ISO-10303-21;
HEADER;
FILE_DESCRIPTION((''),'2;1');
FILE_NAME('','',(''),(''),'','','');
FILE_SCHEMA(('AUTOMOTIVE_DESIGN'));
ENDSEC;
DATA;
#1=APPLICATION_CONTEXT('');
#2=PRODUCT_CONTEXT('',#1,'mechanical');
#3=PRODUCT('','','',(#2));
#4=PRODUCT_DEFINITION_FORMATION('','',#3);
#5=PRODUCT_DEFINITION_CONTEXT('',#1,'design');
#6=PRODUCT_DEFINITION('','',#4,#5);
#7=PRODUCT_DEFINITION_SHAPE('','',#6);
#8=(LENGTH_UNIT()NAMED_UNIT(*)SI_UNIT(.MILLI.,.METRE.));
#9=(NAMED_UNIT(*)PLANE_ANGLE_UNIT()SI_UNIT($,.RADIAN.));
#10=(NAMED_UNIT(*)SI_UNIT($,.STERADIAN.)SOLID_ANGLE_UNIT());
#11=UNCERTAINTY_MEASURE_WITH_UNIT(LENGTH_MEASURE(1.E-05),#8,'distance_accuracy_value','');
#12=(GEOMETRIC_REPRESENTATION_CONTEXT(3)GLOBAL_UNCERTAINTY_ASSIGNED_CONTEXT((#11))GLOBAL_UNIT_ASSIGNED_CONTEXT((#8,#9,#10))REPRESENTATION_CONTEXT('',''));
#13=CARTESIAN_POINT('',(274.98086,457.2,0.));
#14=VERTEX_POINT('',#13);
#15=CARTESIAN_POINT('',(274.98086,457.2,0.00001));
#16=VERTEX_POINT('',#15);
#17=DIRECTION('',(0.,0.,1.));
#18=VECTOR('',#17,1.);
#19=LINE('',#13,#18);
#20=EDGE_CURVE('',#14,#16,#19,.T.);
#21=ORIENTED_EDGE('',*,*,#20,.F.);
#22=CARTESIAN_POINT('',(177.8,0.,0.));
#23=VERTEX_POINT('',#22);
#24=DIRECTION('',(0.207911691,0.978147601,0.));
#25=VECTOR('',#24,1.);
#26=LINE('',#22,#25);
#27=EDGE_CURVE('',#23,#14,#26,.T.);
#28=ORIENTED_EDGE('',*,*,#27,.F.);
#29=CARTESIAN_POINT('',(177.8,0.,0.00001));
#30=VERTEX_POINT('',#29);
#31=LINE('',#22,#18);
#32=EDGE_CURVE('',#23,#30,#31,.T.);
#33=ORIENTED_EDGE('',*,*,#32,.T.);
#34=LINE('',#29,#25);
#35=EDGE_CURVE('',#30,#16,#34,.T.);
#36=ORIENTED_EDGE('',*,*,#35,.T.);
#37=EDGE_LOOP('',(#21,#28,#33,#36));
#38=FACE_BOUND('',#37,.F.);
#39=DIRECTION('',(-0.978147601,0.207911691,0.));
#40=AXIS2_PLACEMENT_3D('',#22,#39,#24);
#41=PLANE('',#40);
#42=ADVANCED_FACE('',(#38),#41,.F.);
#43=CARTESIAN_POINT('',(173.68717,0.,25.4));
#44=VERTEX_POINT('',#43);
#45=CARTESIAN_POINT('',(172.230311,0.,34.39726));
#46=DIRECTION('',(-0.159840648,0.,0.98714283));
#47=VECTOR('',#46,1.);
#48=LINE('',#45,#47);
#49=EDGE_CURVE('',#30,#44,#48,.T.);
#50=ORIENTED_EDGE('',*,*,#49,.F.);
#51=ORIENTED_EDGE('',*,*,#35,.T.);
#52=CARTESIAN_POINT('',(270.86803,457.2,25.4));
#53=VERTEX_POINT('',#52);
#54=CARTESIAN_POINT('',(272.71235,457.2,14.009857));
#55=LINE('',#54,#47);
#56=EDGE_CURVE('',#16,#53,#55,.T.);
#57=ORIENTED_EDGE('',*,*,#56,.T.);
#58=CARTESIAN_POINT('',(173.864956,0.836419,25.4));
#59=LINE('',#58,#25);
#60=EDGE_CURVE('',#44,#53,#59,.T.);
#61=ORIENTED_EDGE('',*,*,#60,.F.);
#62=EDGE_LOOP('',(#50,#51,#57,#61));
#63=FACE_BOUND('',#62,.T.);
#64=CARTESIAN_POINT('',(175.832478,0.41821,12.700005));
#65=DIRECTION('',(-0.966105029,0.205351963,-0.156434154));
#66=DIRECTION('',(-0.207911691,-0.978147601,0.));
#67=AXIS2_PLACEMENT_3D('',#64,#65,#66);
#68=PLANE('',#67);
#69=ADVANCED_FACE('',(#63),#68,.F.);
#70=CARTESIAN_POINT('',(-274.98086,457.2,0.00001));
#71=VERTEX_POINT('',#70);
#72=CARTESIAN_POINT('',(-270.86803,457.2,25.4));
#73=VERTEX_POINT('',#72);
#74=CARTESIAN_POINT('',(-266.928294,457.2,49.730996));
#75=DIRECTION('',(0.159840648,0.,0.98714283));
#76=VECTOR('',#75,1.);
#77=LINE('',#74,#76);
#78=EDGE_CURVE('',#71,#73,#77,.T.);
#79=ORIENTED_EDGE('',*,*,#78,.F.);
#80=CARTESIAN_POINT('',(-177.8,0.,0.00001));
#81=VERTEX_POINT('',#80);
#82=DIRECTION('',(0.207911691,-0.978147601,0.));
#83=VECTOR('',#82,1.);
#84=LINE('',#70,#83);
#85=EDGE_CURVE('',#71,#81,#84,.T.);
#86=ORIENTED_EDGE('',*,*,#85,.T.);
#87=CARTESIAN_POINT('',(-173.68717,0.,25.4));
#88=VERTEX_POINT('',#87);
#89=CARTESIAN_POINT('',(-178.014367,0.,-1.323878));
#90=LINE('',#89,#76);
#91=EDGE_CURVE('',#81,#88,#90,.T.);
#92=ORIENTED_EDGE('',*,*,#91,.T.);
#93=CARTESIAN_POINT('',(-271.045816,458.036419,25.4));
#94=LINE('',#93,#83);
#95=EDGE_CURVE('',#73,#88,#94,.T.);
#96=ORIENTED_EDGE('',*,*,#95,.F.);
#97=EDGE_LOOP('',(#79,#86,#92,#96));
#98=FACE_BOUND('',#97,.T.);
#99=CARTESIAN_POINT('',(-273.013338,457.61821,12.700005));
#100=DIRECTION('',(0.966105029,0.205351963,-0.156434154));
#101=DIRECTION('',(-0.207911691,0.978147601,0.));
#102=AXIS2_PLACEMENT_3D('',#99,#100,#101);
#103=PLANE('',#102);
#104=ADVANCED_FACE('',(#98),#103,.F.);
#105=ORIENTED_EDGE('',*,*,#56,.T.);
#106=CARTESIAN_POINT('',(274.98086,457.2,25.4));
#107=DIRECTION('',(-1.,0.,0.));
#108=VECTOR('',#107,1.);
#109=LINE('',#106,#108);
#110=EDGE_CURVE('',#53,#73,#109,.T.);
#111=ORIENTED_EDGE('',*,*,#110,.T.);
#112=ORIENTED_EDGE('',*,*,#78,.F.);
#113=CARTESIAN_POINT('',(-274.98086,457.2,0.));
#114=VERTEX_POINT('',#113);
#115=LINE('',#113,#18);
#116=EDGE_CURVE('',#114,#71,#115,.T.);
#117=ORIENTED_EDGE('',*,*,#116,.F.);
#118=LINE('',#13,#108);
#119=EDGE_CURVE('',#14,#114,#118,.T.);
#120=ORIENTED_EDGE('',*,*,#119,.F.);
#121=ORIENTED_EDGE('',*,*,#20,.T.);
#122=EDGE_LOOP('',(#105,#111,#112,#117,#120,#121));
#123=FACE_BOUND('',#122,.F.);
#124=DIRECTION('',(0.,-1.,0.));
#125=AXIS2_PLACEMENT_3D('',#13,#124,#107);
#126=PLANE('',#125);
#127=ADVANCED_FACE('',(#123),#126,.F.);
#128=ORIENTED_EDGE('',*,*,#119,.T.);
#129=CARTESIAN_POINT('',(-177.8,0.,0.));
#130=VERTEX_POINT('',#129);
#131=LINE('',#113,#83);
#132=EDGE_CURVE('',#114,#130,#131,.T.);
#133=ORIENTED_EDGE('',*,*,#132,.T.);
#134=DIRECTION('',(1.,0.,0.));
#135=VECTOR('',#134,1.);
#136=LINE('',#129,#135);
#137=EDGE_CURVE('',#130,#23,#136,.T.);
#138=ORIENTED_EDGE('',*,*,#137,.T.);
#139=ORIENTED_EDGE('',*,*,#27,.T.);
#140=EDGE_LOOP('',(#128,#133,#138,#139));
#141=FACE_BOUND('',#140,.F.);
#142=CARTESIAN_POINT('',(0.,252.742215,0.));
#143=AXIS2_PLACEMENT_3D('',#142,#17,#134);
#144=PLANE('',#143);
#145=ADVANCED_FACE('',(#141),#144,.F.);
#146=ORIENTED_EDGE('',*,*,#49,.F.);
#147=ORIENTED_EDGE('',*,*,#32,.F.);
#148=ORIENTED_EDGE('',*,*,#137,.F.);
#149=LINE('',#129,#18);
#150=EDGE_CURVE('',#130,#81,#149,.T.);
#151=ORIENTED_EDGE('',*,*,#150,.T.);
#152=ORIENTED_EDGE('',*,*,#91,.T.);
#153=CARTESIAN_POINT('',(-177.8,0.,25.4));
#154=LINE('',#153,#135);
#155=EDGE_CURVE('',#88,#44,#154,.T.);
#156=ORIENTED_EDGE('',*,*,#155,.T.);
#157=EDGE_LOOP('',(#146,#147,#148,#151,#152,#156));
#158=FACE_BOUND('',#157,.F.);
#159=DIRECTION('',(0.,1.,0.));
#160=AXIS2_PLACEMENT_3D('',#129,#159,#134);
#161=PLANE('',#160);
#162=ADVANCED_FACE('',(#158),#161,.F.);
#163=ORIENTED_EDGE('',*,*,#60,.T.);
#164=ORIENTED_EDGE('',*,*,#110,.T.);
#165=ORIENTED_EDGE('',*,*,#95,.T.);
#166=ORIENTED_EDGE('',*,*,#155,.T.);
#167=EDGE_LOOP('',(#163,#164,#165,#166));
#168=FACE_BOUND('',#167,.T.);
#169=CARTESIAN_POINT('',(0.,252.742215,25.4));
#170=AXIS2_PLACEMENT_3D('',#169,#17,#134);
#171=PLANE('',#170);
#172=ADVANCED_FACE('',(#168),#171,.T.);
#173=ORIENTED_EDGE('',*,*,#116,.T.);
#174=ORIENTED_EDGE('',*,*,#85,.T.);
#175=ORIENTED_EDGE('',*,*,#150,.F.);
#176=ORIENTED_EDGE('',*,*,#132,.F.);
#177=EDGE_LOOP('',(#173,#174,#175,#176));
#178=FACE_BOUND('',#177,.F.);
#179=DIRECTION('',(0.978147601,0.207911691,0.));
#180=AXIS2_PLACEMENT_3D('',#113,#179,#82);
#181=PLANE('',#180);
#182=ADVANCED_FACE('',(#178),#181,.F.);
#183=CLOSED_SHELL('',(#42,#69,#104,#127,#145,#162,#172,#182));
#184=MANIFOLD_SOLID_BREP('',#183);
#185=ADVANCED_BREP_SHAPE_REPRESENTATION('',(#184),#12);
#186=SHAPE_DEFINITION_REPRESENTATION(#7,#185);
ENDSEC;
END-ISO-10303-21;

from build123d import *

# Parameters (mm, degrees)
F2_DEPTH   = 25.4
F3_SIZE2   = 4.022955
F3_SIZE    = 25.39999
F3_2_SIZE2 = 4.022955
F3_2_SIZE  = 25.39999


# Not quite as in the source:
# - a fillet or chamfer is up to 0.001 mm smaller than in the source, because OpenCascade refuses the exact size


with BuildPart() as f2:
    # F1 (on Top) → F2 (new body)
    with BuildSketch(Plane.XY):
        Polygon((-274.9808599955, 457.2), (-177.8, 0), (177.8, 0), (274.9808599955, 457.2), align=None)
    extrude(amount=F2_DEPTH)

    # F3 (size 25.4 and 4.0229647842 in the source; OpenCascade refuses exactly that, so slightly less here)
    f3_edges = [f2.edges().sort_by_distance(p)[0] for p in [
        (-226.39043, 228.6, 25.4),
    ]]
    f3_side = f2.faces().sort_by_distance((-226.39043, 228.6, 12.7))[0]
    chamfer(f3_edges, length=F3_SIZE, length2=F3_SIZE2, reference=f3_side)

    # F3#2 (size 25.4 and 4.0229647842 in the source; OpenCascade refuses exactly that, so slightly less here)
    f3_2_edges = [f2.edges().sort_by_distance(p)[0] for p in [
        (226.39043, 228.6, 25.4),
    ]]
    f3_2_side = f2.faces().sort_by_distance((226.39043, 228.6, 12.7))[0]
    chamfer(f3_2_edges, length=F3_2_SIZE, length2=F3_2_SIZE2, reference=f3_2_side)


solid = f2.part
